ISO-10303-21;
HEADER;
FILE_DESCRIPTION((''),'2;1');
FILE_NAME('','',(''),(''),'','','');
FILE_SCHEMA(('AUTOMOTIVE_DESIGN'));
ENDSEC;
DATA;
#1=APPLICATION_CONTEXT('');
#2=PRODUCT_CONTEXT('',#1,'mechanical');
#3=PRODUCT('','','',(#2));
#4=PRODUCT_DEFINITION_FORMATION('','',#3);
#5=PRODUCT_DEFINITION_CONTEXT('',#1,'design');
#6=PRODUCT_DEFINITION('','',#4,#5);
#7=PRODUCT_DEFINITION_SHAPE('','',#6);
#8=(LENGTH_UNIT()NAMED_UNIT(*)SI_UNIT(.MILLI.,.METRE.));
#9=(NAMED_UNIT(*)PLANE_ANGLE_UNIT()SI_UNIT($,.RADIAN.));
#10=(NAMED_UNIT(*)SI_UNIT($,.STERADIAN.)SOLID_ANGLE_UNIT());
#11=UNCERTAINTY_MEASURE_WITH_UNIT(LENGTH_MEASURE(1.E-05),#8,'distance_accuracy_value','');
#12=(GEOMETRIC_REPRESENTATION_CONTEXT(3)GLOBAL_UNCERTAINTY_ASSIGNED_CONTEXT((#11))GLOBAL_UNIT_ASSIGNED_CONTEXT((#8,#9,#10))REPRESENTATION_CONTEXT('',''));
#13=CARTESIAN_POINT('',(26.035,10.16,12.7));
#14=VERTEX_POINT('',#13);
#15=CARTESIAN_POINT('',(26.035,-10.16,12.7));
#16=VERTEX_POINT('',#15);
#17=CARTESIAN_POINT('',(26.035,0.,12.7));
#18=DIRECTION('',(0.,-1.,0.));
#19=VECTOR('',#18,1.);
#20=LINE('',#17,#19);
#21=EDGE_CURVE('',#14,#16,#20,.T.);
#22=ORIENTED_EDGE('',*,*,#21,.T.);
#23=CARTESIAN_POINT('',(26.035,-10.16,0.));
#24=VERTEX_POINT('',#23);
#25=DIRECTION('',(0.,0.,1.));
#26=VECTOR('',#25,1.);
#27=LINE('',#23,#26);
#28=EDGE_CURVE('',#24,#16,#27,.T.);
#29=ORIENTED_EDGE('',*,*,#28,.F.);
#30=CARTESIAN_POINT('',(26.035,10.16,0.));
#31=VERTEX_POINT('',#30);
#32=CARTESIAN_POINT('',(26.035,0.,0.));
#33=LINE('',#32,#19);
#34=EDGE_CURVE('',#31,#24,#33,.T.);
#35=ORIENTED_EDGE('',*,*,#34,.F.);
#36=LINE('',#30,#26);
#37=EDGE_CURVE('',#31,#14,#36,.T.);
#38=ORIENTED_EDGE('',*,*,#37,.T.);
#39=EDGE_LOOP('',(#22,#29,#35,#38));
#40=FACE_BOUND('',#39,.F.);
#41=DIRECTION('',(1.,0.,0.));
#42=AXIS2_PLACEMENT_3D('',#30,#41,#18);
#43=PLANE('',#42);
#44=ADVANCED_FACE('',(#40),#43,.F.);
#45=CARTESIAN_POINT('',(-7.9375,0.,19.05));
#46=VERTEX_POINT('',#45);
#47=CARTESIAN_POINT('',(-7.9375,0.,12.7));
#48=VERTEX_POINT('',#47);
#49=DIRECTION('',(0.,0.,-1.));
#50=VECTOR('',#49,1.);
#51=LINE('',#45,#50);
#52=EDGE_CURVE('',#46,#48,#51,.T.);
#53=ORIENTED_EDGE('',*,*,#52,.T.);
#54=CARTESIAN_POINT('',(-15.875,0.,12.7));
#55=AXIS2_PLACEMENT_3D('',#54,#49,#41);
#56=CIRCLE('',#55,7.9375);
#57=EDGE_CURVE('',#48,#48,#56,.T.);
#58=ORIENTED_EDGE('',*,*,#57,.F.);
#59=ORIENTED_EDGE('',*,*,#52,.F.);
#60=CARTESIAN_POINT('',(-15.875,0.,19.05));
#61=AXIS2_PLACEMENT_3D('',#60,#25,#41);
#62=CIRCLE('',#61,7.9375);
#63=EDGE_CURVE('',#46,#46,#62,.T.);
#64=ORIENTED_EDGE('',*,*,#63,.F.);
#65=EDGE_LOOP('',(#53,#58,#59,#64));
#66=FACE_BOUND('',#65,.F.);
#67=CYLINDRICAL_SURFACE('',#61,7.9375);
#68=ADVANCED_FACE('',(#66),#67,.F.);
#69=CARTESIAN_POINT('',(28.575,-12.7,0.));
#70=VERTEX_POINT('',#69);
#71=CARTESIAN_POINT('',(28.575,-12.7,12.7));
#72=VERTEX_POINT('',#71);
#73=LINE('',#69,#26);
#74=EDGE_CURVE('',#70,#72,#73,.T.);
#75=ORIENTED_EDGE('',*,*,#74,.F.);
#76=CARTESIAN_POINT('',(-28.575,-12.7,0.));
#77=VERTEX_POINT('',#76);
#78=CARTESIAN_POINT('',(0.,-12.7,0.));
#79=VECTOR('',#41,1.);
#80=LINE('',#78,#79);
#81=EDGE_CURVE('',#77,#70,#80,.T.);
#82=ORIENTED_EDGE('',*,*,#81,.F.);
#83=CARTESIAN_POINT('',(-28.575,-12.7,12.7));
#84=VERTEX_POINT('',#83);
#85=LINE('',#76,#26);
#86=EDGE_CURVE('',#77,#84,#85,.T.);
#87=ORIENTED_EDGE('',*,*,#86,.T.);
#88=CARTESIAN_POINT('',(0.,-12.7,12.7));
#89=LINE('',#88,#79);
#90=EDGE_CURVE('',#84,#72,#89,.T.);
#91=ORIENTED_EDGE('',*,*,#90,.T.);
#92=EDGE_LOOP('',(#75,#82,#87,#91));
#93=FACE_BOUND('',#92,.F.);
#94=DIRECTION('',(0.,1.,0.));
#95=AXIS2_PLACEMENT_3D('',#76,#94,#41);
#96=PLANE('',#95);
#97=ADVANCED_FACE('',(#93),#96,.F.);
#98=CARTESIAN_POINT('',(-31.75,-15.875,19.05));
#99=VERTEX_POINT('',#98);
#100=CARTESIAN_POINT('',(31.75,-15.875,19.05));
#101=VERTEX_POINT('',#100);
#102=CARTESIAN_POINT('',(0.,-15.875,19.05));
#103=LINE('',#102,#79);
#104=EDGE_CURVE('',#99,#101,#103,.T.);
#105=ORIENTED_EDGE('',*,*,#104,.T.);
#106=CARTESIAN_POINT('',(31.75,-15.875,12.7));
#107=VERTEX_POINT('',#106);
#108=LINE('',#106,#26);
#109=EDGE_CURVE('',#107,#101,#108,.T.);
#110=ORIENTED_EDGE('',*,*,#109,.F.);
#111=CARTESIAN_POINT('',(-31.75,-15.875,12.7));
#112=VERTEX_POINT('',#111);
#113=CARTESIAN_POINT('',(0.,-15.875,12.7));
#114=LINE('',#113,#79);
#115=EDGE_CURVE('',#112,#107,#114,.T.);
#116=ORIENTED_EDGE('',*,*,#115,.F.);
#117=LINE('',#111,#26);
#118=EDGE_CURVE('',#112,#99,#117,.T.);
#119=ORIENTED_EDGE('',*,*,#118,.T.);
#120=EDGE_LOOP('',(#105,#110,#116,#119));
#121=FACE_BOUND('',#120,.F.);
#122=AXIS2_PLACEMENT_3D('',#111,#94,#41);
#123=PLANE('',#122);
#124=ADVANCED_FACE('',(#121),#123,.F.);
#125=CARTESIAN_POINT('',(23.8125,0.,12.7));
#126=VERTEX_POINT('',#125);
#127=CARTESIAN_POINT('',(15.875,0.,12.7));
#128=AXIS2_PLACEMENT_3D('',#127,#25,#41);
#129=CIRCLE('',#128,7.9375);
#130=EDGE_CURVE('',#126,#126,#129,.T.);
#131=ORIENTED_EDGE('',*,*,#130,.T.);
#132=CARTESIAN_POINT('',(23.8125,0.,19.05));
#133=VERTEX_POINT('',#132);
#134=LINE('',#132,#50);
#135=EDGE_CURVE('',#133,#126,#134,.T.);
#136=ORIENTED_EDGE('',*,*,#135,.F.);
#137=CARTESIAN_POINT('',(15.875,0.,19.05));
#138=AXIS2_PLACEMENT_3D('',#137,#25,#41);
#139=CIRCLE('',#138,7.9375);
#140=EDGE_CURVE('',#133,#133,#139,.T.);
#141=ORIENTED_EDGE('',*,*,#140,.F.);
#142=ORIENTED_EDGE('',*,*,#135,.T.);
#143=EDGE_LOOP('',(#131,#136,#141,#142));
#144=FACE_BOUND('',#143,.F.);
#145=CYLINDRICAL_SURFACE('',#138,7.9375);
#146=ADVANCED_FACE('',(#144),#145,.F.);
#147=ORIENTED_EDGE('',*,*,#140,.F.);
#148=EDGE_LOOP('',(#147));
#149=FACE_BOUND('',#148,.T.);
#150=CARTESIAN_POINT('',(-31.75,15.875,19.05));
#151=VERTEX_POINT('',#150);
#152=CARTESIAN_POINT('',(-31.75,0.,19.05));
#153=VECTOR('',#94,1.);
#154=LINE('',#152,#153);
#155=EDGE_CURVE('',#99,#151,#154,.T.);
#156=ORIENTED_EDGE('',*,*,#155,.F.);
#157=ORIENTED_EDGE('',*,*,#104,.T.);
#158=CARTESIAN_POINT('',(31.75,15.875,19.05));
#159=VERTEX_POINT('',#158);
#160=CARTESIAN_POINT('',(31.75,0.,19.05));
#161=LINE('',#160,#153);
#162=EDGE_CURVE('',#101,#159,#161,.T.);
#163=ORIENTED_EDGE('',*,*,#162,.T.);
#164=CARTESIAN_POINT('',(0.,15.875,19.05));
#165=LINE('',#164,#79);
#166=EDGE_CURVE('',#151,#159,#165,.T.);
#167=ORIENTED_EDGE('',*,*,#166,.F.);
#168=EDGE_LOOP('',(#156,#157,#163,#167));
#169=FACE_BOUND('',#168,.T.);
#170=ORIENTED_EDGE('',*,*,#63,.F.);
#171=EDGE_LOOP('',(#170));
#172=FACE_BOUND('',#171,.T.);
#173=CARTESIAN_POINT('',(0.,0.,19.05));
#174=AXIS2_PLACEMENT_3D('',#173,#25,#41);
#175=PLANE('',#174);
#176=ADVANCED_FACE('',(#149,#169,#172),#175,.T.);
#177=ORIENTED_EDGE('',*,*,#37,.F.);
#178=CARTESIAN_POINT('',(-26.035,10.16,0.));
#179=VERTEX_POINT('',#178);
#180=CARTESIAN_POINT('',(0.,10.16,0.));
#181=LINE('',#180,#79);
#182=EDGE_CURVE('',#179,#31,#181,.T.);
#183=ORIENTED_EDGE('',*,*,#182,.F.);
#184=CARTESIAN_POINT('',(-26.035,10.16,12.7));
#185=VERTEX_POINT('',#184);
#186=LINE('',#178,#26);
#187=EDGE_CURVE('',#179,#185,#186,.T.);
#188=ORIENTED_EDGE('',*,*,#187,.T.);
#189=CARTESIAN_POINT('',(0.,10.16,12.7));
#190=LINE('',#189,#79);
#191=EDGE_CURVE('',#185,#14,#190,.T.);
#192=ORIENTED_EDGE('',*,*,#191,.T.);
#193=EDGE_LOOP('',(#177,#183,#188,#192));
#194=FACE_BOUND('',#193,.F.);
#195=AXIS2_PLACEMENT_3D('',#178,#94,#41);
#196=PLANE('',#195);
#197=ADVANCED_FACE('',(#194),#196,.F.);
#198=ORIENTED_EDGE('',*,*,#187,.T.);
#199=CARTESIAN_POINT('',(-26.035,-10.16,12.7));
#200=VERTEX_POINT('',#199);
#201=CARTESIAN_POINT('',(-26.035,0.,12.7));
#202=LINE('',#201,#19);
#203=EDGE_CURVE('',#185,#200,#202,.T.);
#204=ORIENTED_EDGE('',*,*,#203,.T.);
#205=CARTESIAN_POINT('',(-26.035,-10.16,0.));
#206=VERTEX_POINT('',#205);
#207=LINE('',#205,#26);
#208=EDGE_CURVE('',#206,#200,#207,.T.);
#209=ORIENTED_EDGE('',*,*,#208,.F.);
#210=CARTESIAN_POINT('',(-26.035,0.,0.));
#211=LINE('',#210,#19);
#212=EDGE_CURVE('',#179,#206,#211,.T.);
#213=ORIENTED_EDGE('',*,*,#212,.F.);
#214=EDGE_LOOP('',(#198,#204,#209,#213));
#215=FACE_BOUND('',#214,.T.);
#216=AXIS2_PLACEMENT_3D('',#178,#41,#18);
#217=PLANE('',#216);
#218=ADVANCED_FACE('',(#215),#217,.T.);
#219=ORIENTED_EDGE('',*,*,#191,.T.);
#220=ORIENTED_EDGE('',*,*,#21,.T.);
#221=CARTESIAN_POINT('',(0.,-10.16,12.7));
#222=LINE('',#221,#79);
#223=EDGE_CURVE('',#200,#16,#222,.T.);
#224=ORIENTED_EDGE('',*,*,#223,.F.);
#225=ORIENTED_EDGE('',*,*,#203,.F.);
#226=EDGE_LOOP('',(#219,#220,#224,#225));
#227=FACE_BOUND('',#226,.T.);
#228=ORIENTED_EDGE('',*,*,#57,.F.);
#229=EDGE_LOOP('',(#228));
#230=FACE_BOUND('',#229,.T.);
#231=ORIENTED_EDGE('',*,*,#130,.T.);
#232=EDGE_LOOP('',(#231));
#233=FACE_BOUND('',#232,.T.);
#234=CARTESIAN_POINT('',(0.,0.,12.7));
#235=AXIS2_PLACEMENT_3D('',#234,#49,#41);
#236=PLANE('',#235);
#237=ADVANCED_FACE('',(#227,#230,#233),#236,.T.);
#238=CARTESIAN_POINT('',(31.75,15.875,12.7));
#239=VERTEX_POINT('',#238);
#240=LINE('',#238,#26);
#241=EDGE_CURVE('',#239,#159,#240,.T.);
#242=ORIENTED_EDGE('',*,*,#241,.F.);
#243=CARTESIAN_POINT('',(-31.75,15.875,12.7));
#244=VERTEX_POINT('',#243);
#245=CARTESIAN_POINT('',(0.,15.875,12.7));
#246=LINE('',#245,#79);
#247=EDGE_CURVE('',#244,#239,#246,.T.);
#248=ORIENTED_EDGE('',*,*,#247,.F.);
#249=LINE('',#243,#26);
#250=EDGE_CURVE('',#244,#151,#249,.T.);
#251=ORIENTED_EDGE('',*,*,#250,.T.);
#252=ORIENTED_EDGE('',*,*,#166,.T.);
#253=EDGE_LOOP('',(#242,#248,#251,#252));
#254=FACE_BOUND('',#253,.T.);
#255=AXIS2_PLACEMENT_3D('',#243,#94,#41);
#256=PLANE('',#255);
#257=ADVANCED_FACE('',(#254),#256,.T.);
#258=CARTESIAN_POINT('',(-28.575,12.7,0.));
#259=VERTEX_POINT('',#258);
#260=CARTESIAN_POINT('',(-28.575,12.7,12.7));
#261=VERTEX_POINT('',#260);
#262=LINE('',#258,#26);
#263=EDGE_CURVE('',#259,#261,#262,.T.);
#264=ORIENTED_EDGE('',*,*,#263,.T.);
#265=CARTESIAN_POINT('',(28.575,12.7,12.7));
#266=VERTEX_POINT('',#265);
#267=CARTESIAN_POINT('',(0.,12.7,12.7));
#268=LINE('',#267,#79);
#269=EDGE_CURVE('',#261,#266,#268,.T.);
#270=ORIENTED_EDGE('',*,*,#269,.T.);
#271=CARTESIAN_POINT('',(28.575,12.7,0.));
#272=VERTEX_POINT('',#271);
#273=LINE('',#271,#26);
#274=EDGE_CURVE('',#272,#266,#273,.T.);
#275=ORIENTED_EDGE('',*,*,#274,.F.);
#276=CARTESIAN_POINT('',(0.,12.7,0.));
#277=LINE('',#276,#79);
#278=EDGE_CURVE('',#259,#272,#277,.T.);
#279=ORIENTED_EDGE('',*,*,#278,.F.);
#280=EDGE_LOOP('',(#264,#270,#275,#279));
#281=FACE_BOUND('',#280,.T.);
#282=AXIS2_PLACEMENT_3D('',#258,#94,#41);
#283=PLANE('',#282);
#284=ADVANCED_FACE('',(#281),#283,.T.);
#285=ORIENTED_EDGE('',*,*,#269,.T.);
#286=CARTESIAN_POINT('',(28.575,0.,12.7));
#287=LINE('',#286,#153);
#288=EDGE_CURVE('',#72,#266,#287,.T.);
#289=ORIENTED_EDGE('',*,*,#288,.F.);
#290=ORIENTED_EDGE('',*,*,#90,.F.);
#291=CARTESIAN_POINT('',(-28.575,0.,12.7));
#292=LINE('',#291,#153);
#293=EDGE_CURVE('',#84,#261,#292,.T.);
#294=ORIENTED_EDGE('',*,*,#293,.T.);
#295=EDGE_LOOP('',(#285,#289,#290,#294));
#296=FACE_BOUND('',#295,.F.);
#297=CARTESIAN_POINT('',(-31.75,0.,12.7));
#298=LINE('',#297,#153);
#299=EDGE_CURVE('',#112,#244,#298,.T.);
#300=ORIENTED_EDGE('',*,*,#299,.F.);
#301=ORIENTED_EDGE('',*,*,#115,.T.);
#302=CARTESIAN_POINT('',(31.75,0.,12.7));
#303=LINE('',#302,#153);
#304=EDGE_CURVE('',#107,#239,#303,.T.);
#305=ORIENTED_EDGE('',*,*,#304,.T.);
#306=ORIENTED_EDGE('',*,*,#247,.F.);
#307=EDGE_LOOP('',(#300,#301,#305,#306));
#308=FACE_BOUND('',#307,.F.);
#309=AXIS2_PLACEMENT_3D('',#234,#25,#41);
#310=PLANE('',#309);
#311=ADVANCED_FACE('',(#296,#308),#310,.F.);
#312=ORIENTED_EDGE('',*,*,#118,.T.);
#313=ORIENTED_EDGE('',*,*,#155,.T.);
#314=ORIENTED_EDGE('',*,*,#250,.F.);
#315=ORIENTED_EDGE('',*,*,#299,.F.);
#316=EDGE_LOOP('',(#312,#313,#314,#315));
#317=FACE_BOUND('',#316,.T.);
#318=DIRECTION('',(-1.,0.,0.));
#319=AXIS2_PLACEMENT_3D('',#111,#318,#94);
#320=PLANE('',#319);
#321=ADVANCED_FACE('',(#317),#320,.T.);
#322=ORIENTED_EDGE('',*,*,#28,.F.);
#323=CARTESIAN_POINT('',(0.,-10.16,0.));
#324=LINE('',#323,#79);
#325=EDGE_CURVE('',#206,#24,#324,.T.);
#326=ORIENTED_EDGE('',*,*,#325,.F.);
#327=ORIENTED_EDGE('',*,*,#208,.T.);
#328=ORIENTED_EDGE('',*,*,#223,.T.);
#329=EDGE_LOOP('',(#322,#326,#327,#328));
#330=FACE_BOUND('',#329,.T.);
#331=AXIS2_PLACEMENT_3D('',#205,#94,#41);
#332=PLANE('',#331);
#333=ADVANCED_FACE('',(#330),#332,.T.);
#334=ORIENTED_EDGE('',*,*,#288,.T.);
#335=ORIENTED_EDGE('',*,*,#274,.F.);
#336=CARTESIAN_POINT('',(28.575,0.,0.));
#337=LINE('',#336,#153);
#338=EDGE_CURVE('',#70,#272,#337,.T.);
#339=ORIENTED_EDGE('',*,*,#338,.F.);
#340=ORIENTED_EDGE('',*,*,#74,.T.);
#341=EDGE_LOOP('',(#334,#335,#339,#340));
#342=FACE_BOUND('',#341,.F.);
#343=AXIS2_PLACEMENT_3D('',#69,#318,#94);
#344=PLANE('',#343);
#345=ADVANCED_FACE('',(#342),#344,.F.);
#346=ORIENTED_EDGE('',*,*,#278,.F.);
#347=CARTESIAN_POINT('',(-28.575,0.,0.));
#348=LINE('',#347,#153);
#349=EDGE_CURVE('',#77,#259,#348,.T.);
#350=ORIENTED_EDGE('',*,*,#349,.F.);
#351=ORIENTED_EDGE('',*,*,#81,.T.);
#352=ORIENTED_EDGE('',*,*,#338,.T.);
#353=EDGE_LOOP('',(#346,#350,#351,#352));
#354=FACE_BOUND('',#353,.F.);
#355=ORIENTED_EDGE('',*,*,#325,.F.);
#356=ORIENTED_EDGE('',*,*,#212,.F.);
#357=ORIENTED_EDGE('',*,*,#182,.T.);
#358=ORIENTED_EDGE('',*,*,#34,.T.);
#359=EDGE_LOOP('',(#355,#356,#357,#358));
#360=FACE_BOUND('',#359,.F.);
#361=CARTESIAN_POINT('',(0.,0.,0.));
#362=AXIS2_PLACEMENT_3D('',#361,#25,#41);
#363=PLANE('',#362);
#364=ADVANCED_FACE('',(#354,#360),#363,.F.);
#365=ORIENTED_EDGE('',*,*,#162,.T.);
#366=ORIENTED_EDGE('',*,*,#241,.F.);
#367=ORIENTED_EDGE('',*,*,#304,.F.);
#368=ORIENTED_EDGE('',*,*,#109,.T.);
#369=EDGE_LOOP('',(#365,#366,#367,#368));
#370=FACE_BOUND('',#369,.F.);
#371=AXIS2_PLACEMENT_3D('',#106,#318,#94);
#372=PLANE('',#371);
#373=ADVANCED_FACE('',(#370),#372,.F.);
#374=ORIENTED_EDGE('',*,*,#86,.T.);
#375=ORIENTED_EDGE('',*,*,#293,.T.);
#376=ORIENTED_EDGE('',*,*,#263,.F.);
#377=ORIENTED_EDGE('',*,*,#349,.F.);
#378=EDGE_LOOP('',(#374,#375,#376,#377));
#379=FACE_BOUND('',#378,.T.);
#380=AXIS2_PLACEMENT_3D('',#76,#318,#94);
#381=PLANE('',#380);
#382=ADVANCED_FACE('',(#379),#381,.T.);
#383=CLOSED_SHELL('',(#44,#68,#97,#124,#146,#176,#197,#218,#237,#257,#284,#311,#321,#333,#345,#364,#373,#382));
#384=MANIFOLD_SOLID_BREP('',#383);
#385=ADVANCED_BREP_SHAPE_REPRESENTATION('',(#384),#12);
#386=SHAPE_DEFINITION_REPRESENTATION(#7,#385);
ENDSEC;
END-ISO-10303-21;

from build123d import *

# Parameters (mm, degrees)
F0_W     = 57.15
F0_H     = 25.4
F1_DEPTH = 12.7
F2_W     = 63.5
F2_H     = 31.75
F2_W_2   = 57.15
F2_H_2   = 25.4
F3_DEPTH = 6.35
F4_R     = 7.9375
F5_DEPTH = 19.051
F6_W     = 52.07
F6_H     = 20.32
F6_R     = 7.9375
F7_DEPTH = 12.7


with BuildPart() as f1:
    # F0 (on Top) → F1 (new body)
    with BuildSketch(Plane.XY):
        Rectangle(F0_W, F0_H)
    extrude(amount=F1_DEPTH)

    # F2 (on face) → F3 (join)
    with BuildSketch(Plane.XY.offset(12.7)):
        Rectangle(F2_W, F2_H)
        Rectangle(F2_W_2, F2_H_2, mode=Mode.SUBTRACT)
        Rectangle(F2_W_2, F2_H_2)
    extrude(amount=F3_DEPTH)

    # F4 (on face) → F5 (cut, through all)
    with BuildSketch(Plane.XY.offset(19.05)):
        with Locations((-15.875, 0)):
            Circle(F4_R)
        with Locations((15.875, 0)):
            Circle(F4_R)
    extrude(amount=-F5_DEPTH, mode=Mode.SUBTRACT)

    # F6 (on face) → F7 (cut)
    with BuildSketch(Plane(origin=(0, 0, 0), x_dir=(1, 0, 0), z_dir=(0, 0, -1))):
        Rectangle(F6_W, F6_H)
        with Locations((-15.875, 0)):
            Circle(F6_R, mode=Mode.SUBTRACT)
        with Locations((15.875, 0)):
            Circle(F6_R, mode=Mode.SUBTRACT)
        with Locations((15.875, 0)):
            Circle(F6_R)
    extrude(amount=-F7_DEPTH, mode=Mode.SUBTRACT)


solid = f1.part
